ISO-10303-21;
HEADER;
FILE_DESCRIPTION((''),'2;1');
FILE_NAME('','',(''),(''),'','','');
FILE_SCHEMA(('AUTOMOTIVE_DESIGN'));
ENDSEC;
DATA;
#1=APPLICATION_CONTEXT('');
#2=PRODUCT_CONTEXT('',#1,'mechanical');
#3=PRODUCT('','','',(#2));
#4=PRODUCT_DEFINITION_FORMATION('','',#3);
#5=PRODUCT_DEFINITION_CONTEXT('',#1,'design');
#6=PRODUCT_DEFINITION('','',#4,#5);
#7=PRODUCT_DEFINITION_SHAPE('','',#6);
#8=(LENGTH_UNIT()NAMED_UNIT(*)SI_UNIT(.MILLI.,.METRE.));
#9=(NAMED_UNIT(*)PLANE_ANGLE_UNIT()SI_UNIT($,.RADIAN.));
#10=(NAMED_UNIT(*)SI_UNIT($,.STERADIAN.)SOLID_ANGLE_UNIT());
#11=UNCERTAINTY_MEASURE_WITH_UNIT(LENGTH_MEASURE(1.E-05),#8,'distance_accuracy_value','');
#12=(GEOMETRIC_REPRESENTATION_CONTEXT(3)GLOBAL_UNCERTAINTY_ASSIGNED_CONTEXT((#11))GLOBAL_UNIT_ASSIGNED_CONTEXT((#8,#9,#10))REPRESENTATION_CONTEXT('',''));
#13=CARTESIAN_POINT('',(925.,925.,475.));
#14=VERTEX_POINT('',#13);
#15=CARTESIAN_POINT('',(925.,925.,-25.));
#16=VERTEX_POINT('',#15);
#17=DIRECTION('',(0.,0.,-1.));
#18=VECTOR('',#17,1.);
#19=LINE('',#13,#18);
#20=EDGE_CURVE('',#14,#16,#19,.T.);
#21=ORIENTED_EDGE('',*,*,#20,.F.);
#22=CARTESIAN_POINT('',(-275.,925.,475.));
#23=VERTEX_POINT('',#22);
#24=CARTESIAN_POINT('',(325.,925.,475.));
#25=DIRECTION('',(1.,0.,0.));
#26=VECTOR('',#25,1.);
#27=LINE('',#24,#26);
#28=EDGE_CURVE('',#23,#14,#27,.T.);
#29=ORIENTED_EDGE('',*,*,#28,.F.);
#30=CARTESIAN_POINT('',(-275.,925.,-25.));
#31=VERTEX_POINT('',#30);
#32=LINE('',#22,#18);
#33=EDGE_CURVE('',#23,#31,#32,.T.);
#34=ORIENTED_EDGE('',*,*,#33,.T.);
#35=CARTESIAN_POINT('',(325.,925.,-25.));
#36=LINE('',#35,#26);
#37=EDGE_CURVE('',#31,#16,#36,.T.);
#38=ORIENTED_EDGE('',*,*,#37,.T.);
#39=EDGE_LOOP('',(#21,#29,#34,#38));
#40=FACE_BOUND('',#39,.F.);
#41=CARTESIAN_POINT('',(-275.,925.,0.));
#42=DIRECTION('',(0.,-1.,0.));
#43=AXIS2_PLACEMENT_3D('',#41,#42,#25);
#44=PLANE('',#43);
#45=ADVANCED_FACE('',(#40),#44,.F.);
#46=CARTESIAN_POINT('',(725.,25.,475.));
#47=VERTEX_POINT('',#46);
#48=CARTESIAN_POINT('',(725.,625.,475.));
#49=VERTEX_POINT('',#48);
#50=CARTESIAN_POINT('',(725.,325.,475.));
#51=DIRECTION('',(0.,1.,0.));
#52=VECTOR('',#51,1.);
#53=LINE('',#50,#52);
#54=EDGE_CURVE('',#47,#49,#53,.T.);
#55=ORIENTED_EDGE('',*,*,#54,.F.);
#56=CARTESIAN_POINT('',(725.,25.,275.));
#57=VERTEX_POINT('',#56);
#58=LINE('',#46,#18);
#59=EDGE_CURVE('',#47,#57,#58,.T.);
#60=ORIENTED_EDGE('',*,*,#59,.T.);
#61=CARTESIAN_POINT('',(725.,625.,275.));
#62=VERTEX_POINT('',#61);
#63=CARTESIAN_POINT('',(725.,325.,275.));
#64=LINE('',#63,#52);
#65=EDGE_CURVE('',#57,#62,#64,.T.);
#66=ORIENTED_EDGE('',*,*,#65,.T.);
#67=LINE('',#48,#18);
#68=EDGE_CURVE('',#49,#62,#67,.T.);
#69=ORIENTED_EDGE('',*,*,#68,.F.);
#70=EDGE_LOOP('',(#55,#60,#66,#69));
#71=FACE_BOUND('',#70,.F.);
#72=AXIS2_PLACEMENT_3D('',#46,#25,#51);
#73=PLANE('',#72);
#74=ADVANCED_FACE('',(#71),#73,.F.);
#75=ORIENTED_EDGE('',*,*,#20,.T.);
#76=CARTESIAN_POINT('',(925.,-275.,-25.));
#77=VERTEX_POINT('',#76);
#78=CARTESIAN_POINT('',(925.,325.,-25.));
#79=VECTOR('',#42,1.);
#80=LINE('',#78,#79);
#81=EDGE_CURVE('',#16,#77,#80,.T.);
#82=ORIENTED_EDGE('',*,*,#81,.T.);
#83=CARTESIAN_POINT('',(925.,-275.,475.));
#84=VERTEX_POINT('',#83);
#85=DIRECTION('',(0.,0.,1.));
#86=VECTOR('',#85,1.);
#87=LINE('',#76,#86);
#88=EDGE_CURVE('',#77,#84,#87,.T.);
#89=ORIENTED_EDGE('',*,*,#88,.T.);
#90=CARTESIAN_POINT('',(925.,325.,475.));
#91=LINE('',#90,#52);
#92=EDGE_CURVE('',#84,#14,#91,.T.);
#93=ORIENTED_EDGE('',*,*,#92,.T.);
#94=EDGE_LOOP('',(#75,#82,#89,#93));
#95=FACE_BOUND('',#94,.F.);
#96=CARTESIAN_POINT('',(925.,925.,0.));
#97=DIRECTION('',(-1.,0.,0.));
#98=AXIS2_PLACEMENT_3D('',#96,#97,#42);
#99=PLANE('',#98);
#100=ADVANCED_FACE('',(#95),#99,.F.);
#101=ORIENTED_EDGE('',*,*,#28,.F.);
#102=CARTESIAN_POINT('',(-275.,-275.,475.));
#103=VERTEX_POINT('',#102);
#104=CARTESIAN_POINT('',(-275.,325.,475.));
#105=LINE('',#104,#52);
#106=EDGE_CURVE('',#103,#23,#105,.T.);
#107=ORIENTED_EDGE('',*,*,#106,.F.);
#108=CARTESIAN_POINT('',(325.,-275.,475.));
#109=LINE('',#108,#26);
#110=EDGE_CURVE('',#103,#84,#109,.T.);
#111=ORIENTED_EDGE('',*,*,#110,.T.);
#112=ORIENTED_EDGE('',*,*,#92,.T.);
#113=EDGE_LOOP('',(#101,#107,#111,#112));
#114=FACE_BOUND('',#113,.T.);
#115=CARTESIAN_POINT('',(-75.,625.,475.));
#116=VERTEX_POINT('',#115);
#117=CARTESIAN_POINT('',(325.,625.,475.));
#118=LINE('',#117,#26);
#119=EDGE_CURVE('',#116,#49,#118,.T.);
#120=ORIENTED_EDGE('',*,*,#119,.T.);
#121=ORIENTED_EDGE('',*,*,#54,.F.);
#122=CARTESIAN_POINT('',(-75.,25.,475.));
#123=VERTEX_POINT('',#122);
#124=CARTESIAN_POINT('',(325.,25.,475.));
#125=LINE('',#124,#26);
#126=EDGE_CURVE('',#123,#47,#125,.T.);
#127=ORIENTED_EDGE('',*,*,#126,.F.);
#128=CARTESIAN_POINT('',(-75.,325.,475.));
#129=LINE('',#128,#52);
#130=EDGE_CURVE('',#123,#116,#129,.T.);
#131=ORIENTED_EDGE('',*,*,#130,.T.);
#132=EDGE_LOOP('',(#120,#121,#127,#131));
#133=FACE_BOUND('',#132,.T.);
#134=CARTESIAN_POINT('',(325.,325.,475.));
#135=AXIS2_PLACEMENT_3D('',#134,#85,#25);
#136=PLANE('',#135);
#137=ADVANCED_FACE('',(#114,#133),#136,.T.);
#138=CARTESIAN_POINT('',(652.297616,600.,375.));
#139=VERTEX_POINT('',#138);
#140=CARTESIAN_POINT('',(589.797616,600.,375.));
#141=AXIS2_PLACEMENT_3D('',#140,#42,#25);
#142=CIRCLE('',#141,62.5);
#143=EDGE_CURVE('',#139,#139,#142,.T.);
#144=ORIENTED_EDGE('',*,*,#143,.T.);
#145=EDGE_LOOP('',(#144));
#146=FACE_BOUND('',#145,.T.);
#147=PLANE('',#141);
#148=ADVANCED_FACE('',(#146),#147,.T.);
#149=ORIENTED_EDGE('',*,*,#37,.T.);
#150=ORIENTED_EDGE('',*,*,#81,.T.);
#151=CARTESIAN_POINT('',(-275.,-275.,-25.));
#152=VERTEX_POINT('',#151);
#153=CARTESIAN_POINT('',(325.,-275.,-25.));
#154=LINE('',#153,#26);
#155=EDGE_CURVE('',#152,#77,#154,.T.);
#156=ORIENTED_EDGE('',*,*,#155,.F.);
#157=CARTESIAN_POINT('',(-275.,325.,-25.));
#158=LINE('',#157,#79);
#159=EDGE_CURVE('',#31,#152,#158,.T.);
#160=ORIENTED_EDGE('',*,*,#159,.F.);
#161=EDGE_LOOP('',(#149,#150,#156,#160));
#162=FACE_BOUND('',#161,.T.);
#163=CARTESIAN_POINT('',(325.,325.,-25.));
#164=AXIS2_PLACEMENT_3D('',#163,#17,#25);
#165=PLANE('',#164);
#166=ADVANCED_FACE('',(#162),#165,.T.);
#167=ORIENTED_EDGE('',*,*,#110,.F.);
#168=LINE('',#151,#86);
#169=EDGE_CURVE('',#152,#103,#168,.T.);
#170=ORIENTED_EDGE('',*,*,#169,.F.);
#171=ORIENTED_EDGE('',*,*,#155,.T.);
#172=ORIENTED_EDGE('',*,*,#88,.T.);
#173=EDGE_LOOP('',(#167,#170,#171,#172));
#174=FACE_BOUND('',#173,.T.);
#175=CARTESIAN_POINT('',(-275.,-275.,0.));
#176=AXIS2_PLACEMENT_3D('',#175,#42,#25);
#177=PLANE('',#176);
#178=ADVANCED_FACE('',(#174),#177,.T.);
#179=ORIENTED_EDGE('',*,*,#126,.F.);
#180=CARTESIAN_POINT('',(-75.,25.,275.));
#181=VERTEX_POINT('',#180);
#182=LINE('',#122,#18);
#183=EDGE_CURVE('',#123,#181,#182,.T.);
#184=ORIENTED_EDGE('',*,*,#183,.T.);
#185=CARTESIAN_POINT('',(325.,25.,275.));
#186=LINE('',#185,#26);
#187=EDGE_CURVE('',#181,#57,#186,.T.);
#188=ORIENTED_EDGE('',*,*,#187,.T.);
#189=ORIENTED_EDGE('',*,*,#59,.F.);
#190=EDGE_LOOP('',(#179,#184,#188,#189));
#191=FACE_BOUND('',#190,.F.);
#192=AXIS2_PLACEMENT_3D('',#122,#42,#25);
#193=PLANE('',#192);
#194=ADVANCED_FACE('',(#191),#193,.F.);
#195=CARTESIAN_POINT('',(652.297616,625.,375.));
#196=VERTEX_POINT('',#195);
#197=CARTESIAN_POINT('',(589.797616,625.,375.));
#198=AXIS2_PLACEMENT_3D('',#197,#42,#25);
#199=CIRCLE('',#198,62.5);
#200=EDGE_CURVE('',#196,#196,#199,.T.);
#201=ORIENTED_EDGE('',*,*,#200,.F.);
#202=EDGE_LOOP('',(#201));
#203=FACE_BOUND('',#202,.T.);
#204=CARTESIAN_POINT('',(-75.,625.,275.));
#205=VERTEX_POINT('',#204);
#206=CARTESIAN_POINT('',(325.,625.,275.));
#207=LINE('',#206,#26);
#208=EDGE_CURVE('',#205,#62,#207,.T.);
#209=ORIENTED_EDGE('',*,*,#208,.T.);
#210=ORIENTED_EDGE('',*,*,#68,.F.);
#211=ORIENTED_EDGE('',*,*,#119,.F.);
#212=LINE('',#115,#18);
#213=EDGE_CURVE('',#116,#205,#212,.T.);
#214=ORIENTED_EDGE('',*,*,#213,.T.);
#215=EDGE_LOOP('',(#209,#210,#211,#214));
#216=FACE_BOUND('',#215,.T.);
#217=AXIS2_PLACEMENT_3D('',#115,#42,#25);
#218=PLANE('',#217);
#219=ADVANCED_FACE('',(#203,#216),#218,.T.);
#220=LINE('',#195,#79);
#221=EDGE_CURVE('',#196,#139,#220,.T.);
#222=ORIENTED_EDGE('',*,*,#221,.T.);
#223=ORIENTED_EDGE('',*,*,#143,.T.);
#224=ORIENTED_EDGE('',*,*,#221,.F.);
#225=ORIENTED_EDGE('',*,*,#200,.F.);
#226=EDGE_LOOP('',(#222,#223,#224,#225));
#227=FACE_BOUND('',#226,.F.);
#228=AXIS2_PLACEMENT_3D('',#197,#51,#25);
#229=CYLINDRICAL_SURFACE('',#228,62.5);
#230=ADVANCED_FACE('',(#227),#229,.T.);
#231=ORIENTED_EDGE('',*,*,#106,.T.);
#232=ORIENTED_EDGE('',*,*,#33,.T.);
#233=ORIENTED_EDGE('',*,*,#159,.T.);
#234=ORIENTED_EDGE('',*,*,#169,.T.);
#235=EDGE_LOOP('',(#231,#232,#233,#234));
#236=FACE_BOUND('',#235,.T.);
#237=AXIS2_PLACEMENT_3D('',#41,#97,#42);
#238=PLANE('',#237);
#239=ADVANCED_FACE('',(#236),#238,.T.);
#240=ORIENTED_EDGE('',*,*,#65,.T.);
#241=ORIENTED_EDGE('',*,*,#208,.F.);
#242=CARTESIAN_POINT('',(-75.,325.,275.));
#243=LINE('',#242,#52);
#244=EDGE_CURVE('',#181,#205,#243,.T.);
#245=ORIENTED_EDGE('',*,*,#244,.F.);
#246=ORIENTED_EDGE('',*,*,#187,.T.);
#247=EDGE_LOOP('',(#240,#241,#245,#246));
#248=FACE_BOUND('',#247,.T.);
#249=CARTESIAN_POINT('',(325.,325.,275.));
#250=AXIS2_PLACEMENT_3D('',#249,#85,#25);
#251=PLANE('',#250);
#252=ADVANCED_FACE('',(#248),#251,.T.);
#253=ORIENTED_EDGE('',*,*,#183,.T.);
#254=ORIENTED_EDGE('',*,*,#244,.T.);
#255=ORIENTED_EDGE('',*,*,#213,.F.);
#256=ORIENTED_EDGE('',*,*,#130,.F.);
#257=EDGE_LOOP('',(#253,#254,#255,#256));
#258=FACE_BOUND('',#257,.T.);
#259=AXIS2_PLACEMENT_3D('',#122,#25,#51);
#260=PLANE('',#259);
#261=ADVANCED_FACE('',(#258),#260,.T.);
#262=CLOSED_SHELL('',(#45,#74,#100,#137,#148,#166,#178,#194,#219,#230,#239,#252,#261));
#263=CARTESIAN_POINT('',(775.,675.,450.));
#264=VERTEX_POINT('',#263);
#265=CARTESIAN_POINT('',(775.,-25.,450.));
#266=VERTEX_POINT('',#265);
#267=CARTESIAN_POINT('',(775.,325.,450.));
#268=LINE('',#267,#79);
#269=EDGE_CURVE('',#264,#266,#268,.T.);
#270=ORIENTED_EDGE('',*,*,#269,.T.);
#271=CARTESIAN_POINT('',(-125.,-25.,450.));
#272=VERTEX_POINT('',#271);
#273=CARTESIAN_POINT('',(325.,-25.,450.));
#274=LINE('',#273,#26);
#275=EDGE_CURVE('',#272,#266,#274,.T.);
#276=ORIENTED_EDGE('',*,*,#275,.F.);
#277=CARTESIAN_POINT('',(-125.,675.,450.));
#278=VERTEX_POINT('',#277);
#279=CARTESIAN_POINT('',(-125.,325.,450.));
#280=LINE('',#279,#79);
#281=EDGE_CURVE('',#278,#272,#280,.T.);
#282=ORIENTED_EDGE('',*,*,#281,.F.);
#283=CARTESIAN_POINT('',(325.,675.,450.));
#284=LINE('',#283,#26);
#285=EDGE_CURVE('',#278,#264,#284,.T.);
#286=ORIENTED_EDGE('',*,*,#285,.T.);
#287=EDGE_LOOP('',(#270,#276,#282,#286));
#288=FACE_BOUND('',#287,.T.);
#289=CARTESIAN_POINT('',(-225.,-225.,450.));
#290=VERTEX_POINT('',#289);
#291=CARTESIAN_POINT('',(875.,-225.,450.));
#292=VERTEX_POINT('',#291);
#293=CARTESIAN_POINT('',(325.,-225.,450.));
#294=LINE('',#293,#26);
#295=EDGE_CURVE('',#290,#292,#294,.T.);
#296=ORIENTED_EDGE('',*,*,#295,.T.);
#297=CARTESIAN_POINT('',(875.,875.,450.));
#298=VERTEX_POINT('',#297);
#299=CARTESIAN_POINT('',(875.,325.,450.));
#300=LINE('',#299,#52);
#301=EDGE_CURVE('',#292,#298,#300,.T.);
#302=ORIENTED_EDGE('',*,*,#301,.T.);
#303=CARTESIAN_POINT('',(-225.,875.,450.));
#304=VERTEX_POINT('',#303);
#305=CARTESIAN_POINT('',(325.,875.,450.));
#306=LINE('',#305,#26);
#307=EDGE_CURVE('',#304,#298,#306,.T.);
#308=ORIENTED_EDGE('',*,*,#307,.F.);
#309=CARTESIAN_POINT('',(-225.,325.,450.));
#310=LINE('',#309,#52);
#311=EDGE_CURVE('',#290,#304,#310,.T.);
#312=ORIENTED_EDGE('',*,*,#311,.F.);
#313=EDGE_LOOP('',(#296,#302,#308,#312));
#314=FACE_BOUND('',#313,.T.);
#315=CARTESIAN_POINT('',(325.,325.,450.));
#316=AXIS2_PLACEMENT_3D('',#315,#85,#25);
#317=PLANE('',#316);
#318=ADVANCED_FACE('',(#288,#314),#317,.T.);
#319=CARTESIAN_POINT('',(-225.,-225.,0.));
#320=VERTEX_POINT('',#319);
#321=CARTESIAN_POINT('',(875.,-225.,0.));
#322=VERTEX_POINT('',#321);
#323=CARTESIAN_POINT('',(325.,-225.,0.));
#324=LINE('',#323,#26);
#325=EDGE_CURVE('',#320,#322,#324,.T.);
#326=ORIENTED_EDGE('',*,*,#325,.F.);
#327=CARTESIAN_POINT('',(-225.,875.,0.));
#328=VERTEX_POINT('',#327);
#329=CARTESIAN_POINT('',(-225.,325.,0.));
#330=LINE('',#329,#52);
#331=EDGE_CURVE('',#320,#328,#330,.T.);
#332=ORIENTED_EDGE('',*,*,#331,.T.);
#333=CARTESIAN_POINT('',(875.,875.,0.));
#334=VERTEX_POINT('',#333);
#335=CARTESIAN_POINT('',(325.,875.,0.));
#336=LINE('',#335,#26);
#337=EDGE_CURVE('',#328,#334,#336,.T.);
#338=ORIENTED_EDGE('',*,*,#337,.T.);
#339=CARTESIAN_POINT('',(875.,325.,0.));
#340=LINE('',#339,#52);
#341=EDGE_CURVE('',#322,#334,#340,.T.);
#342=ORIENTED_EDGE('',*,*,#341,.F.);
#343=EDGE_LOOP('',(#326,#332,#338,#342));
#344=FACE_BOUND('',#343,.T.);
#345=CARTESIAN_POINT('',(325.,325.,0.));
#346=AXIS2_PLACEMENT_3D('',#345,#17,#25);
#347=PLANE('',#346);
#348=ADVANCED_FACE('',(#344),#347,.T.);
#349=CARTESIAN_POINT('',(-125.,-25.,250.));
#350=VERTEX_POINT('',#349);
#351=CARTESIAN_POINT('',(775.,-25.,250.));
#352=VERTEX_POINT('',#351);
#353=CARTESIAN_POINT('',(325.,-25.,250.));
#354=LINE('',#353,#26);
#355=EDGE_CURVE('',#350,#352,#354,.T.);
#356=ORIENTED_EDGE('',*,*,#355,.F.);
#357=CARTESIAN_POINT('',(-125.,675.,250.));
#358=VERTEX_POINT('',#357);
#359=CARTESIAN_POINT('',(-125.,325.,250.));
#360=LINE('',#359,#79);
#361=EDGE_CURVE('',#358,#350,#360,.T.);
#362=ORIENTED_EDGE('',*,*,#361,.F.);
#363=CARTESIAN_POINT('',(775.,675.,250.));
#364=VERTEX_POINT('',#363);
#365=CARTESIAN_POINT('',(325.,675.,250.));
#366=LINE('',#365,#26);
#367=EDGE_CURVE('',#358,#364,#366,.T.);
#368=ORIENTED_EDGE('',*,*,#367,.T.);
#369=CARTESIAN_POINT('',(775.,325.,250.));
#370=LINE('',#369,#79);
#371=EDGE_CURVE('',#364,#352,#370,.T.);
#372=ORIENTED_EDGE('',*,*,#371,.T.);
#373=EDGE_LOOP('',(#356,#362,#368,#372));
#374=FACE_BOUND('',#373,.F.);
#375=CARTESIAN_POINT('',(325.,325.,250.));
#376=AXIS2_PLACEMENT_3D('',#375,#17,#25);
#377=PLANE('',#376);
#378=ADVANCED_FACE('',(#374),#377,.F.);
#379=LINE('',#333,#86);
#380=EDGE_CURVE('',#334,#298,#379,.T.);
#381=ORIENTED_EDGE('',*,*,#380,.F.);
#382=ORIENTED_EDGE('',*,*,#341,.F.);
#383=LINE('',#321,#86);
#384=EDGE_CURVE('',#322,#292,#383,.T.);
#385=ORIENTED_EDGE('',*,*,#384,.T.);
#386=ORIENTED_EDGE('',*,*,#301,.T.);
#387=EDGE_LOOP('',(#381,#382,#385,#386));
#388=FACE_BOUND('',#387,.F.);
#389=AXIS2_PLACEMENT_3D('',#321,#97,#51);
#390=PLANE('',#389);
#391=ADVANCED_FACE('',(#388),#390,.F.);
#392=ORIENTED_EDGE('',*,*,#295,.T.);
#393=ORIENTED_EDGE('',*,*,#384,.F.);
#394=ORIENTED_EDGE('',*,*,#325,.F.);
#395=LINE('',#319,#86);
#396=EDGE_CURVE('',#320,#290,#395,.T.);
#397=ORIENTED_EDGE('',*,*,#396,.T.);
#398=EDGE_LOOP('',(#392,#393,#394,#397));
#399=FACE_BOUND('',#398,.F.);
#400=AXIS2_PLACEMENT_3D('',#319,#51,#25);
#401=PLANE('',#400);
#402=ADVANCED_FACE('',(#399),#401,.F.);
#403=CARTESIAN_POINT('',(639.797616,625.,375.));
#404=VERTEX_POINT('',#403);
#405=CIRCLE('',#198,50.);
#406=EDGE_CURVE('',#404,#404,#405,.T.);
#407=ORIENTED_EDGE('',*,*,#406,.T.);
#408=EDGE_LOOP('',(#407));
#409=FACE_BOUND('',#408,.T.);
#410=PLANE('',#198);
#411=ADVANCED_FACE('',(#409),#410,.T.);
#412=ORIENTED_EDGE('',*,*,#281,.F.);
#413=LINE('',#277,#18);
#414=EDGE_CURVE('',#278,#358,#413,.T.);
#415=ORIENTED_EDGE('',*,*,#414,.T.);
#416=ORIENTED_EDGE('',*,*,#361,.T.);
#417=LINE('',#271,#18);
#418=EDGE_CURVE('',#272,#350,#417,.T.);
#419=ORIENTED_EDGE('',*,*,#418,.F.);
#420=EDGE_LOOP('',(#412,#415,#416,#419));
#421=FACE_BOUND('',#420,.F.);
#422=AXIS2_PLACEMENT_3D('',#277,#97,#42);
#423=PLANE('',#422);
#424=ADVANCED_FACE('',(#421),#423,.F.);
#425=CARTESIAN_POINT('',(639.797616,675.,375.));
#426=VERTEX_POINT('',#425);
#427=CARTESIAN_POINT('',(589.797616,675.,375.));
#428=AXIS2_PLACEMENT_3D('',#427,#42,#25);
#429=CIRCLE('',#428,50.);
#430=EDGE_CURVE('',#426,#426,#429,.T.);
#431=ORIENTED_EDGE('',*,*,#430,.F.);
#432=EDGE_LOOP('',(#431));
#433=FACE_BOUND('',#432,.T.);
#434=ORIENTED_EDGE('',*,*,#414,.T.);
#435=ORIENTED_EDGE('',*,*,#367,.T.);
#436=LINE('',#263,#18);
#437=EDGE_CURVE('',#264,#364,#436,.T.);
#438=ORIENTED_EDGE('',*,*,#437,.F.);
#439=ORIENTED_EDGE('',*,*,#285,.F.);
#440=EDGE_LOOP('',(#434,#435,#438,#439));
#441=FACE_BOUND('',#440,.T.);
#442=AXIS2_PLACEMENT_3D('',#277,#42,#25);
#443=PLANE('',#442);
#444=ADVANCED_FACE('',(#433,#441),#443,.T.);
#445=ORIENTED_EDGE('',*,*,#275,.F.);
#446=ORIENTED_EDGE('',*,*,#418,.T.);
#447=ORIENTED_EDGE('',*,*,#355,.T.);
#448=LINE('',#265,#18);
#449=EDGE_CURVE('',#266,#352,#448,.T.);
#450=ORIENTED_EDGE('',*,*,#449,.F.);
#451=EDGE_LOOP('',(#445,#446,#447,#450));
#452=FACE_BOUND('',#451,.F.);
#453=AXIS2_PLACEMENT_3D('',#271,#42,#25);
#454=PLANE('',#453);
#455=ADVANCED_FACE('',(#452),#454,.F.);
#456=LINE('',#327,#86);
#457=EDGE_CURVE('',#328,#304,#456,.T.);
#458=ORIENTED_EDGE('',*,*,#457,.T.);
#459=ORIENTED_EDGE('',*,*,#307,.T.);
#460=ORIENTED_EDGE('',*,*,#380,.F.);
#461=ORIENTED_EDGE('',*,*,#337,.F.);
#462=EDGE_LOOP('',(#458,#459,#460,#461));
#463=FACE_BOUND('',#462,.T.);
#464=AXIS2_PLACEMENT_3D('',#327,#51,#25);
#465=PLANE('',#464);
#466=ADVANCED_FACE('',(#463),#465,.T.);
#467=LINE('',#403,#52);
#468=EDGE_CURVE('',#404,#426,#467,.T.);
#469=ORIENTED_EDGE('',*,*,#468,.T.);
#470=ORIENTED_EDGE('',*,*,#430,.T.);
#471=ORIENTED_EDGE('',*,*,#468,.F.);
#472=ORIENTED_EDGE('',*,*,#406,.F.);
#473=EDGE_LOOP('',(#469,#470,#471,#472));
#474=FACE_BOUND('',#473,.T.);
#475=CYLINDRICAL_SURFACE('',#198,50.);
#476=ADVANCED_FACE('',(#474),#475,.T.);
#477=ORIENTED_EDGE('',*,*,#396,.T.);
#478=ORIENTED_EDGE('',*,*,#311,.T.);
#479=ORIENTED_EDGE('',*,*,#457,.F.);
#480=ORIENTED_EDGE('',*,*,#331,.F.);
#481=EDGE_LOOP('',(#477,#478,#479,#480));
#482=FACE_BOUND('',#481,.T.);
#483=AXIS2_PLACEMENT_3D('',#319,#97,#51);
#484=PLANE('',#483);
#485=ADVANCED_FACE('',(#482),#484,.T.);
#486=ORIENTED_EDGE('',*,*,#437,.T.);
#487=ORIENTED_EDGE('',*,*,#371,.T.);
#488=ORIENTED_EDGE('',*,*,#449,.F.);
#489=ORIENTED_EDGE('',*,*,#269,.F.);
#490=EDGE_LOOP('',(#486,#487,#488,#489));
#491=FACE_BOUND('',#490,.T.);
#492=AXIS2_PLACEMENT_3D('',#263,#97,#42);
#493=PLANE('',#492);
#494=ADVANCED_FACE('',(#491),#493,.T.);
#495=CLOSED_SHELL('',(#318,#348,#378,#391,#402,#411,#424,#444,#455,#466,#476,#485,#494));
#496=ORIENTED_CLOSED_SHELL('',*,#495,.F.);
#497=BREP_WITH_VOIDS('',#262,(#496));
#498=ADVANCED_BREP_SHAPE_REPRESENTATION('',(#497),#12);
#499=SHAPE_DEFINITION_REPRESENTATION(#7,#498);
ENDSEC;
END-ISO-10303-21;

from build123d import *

# Parameters (mm, degrees)
F0_W      = 1200
F0_H      = 1200
F0_W_2    = 1100
F0_H_2    = 1100
F1_DEPTH  = 450
F2_W      = 1200
F2_H      = 1200
F2_W_2    = 1100
F2_H_2    = 1100
F3_DEPTH  = 25
F4_W      = 900
F4_H      = 700
F5_DEPTH  = 200
F6_W      = 1200
F6_H      = 1200
F6_W_2    = 1100
F6_H_2    = 1100
F7_DEPTH  = 25
F8_W      = 800
F8_H      = 600
F9_DEPTH  = 200
F10_R     = 50
F11_DEPTH = 50
F12_R     = 62.5
F12_R_2   = 50
F13_DEPTH = 25


with BuildPart() as f1:
    # F0 (on Top) → F1 (new body)
    with BuildSketch(Plane.XY):
        with Locations((325, 325)):
            Rectangle(F0_W, F0_H)
        with Locations((325, 325)):
            Rectangle(F0_W_2, F0_H_2, mode=Mode.SUBTRACT)
    extrude(amount=F1_DEPTH)

    # F2 (on face) → F3 (join)
    with BuildSketch(Plane.XY.offset(450)):
        with Locations((325, 325)):
            Rectangle(F2_W, F2_H)
        with Locations((325, 325)):
            Rectangle(F2_W_2, F2_H_2, mode=Mode.SUBTRACT)
        with Locations((325, 325)):
            Rectangle(F2_W_2, F2_H_2)
    extrude(amount=F3_DEPTH)

    # F4 (on face) → F5 (join)
    with BuildSketch(Plane(origin=(0, 0, 450), x_dir=(1, 0, 0), z_dir=(0, 0, -1))):
        with Locations((325, -325)):
            Rectangle(F4_W, F4_H)
    extrude(amount=F5_DEPTH)

    # F6 (on face) → F7 (join)
    with BuildSketch(Plane(origin=(0, 0, 0), x_dir=(1, 0, 0), z_dir=(0, 0, -1))):
        with Locations((325, -325)):
            Rectangle(F6_W, F6_H)
        with Locations((325, -325)):
            Rectangle(F6_W_2, F6_H_2, mode=Mode.SUBTRACT)
        with Locations((325, -325)):
            Rectangle(F6_W_2, F6_H_2)
    extrude(amount=F7_DEPTH)

    # F8 (on face) → F9 (cut)
    with BuildSketch(Plane.XY.offset(475)):
        with Locations((325, 325)):
            Rectangle(F8_W, F8_H)
    extrude(amount=-F9_DEPTH, mode=Mode.SUBTRACT)

    # F10 (on face) → F11 (cut, through all)
    with BuildSketch(Plane.XZ.offset(-625)):
        with Locations((589.7976160049, 375)):
            Circle(F10_R)
    extrude(amount=-F11_DEPTH, mode=Mode.SUBTRACT)

    # F12 (on face) → F13 (join)
    with BuildSketch(Plane.XZ.offset(-625)):
        with Locations((589.7976160049, 375)):
            Circle(F12_R)
        with Locations((589.7976160049, 375)):
            Circle(F12_R_2, mode=Mode.SUBTRACT)
        with Locations((589.7976160049, 375)):
            Circle(F12_R_2)
    extrude(amount=F13_DEPTH)


solid = f1.part
